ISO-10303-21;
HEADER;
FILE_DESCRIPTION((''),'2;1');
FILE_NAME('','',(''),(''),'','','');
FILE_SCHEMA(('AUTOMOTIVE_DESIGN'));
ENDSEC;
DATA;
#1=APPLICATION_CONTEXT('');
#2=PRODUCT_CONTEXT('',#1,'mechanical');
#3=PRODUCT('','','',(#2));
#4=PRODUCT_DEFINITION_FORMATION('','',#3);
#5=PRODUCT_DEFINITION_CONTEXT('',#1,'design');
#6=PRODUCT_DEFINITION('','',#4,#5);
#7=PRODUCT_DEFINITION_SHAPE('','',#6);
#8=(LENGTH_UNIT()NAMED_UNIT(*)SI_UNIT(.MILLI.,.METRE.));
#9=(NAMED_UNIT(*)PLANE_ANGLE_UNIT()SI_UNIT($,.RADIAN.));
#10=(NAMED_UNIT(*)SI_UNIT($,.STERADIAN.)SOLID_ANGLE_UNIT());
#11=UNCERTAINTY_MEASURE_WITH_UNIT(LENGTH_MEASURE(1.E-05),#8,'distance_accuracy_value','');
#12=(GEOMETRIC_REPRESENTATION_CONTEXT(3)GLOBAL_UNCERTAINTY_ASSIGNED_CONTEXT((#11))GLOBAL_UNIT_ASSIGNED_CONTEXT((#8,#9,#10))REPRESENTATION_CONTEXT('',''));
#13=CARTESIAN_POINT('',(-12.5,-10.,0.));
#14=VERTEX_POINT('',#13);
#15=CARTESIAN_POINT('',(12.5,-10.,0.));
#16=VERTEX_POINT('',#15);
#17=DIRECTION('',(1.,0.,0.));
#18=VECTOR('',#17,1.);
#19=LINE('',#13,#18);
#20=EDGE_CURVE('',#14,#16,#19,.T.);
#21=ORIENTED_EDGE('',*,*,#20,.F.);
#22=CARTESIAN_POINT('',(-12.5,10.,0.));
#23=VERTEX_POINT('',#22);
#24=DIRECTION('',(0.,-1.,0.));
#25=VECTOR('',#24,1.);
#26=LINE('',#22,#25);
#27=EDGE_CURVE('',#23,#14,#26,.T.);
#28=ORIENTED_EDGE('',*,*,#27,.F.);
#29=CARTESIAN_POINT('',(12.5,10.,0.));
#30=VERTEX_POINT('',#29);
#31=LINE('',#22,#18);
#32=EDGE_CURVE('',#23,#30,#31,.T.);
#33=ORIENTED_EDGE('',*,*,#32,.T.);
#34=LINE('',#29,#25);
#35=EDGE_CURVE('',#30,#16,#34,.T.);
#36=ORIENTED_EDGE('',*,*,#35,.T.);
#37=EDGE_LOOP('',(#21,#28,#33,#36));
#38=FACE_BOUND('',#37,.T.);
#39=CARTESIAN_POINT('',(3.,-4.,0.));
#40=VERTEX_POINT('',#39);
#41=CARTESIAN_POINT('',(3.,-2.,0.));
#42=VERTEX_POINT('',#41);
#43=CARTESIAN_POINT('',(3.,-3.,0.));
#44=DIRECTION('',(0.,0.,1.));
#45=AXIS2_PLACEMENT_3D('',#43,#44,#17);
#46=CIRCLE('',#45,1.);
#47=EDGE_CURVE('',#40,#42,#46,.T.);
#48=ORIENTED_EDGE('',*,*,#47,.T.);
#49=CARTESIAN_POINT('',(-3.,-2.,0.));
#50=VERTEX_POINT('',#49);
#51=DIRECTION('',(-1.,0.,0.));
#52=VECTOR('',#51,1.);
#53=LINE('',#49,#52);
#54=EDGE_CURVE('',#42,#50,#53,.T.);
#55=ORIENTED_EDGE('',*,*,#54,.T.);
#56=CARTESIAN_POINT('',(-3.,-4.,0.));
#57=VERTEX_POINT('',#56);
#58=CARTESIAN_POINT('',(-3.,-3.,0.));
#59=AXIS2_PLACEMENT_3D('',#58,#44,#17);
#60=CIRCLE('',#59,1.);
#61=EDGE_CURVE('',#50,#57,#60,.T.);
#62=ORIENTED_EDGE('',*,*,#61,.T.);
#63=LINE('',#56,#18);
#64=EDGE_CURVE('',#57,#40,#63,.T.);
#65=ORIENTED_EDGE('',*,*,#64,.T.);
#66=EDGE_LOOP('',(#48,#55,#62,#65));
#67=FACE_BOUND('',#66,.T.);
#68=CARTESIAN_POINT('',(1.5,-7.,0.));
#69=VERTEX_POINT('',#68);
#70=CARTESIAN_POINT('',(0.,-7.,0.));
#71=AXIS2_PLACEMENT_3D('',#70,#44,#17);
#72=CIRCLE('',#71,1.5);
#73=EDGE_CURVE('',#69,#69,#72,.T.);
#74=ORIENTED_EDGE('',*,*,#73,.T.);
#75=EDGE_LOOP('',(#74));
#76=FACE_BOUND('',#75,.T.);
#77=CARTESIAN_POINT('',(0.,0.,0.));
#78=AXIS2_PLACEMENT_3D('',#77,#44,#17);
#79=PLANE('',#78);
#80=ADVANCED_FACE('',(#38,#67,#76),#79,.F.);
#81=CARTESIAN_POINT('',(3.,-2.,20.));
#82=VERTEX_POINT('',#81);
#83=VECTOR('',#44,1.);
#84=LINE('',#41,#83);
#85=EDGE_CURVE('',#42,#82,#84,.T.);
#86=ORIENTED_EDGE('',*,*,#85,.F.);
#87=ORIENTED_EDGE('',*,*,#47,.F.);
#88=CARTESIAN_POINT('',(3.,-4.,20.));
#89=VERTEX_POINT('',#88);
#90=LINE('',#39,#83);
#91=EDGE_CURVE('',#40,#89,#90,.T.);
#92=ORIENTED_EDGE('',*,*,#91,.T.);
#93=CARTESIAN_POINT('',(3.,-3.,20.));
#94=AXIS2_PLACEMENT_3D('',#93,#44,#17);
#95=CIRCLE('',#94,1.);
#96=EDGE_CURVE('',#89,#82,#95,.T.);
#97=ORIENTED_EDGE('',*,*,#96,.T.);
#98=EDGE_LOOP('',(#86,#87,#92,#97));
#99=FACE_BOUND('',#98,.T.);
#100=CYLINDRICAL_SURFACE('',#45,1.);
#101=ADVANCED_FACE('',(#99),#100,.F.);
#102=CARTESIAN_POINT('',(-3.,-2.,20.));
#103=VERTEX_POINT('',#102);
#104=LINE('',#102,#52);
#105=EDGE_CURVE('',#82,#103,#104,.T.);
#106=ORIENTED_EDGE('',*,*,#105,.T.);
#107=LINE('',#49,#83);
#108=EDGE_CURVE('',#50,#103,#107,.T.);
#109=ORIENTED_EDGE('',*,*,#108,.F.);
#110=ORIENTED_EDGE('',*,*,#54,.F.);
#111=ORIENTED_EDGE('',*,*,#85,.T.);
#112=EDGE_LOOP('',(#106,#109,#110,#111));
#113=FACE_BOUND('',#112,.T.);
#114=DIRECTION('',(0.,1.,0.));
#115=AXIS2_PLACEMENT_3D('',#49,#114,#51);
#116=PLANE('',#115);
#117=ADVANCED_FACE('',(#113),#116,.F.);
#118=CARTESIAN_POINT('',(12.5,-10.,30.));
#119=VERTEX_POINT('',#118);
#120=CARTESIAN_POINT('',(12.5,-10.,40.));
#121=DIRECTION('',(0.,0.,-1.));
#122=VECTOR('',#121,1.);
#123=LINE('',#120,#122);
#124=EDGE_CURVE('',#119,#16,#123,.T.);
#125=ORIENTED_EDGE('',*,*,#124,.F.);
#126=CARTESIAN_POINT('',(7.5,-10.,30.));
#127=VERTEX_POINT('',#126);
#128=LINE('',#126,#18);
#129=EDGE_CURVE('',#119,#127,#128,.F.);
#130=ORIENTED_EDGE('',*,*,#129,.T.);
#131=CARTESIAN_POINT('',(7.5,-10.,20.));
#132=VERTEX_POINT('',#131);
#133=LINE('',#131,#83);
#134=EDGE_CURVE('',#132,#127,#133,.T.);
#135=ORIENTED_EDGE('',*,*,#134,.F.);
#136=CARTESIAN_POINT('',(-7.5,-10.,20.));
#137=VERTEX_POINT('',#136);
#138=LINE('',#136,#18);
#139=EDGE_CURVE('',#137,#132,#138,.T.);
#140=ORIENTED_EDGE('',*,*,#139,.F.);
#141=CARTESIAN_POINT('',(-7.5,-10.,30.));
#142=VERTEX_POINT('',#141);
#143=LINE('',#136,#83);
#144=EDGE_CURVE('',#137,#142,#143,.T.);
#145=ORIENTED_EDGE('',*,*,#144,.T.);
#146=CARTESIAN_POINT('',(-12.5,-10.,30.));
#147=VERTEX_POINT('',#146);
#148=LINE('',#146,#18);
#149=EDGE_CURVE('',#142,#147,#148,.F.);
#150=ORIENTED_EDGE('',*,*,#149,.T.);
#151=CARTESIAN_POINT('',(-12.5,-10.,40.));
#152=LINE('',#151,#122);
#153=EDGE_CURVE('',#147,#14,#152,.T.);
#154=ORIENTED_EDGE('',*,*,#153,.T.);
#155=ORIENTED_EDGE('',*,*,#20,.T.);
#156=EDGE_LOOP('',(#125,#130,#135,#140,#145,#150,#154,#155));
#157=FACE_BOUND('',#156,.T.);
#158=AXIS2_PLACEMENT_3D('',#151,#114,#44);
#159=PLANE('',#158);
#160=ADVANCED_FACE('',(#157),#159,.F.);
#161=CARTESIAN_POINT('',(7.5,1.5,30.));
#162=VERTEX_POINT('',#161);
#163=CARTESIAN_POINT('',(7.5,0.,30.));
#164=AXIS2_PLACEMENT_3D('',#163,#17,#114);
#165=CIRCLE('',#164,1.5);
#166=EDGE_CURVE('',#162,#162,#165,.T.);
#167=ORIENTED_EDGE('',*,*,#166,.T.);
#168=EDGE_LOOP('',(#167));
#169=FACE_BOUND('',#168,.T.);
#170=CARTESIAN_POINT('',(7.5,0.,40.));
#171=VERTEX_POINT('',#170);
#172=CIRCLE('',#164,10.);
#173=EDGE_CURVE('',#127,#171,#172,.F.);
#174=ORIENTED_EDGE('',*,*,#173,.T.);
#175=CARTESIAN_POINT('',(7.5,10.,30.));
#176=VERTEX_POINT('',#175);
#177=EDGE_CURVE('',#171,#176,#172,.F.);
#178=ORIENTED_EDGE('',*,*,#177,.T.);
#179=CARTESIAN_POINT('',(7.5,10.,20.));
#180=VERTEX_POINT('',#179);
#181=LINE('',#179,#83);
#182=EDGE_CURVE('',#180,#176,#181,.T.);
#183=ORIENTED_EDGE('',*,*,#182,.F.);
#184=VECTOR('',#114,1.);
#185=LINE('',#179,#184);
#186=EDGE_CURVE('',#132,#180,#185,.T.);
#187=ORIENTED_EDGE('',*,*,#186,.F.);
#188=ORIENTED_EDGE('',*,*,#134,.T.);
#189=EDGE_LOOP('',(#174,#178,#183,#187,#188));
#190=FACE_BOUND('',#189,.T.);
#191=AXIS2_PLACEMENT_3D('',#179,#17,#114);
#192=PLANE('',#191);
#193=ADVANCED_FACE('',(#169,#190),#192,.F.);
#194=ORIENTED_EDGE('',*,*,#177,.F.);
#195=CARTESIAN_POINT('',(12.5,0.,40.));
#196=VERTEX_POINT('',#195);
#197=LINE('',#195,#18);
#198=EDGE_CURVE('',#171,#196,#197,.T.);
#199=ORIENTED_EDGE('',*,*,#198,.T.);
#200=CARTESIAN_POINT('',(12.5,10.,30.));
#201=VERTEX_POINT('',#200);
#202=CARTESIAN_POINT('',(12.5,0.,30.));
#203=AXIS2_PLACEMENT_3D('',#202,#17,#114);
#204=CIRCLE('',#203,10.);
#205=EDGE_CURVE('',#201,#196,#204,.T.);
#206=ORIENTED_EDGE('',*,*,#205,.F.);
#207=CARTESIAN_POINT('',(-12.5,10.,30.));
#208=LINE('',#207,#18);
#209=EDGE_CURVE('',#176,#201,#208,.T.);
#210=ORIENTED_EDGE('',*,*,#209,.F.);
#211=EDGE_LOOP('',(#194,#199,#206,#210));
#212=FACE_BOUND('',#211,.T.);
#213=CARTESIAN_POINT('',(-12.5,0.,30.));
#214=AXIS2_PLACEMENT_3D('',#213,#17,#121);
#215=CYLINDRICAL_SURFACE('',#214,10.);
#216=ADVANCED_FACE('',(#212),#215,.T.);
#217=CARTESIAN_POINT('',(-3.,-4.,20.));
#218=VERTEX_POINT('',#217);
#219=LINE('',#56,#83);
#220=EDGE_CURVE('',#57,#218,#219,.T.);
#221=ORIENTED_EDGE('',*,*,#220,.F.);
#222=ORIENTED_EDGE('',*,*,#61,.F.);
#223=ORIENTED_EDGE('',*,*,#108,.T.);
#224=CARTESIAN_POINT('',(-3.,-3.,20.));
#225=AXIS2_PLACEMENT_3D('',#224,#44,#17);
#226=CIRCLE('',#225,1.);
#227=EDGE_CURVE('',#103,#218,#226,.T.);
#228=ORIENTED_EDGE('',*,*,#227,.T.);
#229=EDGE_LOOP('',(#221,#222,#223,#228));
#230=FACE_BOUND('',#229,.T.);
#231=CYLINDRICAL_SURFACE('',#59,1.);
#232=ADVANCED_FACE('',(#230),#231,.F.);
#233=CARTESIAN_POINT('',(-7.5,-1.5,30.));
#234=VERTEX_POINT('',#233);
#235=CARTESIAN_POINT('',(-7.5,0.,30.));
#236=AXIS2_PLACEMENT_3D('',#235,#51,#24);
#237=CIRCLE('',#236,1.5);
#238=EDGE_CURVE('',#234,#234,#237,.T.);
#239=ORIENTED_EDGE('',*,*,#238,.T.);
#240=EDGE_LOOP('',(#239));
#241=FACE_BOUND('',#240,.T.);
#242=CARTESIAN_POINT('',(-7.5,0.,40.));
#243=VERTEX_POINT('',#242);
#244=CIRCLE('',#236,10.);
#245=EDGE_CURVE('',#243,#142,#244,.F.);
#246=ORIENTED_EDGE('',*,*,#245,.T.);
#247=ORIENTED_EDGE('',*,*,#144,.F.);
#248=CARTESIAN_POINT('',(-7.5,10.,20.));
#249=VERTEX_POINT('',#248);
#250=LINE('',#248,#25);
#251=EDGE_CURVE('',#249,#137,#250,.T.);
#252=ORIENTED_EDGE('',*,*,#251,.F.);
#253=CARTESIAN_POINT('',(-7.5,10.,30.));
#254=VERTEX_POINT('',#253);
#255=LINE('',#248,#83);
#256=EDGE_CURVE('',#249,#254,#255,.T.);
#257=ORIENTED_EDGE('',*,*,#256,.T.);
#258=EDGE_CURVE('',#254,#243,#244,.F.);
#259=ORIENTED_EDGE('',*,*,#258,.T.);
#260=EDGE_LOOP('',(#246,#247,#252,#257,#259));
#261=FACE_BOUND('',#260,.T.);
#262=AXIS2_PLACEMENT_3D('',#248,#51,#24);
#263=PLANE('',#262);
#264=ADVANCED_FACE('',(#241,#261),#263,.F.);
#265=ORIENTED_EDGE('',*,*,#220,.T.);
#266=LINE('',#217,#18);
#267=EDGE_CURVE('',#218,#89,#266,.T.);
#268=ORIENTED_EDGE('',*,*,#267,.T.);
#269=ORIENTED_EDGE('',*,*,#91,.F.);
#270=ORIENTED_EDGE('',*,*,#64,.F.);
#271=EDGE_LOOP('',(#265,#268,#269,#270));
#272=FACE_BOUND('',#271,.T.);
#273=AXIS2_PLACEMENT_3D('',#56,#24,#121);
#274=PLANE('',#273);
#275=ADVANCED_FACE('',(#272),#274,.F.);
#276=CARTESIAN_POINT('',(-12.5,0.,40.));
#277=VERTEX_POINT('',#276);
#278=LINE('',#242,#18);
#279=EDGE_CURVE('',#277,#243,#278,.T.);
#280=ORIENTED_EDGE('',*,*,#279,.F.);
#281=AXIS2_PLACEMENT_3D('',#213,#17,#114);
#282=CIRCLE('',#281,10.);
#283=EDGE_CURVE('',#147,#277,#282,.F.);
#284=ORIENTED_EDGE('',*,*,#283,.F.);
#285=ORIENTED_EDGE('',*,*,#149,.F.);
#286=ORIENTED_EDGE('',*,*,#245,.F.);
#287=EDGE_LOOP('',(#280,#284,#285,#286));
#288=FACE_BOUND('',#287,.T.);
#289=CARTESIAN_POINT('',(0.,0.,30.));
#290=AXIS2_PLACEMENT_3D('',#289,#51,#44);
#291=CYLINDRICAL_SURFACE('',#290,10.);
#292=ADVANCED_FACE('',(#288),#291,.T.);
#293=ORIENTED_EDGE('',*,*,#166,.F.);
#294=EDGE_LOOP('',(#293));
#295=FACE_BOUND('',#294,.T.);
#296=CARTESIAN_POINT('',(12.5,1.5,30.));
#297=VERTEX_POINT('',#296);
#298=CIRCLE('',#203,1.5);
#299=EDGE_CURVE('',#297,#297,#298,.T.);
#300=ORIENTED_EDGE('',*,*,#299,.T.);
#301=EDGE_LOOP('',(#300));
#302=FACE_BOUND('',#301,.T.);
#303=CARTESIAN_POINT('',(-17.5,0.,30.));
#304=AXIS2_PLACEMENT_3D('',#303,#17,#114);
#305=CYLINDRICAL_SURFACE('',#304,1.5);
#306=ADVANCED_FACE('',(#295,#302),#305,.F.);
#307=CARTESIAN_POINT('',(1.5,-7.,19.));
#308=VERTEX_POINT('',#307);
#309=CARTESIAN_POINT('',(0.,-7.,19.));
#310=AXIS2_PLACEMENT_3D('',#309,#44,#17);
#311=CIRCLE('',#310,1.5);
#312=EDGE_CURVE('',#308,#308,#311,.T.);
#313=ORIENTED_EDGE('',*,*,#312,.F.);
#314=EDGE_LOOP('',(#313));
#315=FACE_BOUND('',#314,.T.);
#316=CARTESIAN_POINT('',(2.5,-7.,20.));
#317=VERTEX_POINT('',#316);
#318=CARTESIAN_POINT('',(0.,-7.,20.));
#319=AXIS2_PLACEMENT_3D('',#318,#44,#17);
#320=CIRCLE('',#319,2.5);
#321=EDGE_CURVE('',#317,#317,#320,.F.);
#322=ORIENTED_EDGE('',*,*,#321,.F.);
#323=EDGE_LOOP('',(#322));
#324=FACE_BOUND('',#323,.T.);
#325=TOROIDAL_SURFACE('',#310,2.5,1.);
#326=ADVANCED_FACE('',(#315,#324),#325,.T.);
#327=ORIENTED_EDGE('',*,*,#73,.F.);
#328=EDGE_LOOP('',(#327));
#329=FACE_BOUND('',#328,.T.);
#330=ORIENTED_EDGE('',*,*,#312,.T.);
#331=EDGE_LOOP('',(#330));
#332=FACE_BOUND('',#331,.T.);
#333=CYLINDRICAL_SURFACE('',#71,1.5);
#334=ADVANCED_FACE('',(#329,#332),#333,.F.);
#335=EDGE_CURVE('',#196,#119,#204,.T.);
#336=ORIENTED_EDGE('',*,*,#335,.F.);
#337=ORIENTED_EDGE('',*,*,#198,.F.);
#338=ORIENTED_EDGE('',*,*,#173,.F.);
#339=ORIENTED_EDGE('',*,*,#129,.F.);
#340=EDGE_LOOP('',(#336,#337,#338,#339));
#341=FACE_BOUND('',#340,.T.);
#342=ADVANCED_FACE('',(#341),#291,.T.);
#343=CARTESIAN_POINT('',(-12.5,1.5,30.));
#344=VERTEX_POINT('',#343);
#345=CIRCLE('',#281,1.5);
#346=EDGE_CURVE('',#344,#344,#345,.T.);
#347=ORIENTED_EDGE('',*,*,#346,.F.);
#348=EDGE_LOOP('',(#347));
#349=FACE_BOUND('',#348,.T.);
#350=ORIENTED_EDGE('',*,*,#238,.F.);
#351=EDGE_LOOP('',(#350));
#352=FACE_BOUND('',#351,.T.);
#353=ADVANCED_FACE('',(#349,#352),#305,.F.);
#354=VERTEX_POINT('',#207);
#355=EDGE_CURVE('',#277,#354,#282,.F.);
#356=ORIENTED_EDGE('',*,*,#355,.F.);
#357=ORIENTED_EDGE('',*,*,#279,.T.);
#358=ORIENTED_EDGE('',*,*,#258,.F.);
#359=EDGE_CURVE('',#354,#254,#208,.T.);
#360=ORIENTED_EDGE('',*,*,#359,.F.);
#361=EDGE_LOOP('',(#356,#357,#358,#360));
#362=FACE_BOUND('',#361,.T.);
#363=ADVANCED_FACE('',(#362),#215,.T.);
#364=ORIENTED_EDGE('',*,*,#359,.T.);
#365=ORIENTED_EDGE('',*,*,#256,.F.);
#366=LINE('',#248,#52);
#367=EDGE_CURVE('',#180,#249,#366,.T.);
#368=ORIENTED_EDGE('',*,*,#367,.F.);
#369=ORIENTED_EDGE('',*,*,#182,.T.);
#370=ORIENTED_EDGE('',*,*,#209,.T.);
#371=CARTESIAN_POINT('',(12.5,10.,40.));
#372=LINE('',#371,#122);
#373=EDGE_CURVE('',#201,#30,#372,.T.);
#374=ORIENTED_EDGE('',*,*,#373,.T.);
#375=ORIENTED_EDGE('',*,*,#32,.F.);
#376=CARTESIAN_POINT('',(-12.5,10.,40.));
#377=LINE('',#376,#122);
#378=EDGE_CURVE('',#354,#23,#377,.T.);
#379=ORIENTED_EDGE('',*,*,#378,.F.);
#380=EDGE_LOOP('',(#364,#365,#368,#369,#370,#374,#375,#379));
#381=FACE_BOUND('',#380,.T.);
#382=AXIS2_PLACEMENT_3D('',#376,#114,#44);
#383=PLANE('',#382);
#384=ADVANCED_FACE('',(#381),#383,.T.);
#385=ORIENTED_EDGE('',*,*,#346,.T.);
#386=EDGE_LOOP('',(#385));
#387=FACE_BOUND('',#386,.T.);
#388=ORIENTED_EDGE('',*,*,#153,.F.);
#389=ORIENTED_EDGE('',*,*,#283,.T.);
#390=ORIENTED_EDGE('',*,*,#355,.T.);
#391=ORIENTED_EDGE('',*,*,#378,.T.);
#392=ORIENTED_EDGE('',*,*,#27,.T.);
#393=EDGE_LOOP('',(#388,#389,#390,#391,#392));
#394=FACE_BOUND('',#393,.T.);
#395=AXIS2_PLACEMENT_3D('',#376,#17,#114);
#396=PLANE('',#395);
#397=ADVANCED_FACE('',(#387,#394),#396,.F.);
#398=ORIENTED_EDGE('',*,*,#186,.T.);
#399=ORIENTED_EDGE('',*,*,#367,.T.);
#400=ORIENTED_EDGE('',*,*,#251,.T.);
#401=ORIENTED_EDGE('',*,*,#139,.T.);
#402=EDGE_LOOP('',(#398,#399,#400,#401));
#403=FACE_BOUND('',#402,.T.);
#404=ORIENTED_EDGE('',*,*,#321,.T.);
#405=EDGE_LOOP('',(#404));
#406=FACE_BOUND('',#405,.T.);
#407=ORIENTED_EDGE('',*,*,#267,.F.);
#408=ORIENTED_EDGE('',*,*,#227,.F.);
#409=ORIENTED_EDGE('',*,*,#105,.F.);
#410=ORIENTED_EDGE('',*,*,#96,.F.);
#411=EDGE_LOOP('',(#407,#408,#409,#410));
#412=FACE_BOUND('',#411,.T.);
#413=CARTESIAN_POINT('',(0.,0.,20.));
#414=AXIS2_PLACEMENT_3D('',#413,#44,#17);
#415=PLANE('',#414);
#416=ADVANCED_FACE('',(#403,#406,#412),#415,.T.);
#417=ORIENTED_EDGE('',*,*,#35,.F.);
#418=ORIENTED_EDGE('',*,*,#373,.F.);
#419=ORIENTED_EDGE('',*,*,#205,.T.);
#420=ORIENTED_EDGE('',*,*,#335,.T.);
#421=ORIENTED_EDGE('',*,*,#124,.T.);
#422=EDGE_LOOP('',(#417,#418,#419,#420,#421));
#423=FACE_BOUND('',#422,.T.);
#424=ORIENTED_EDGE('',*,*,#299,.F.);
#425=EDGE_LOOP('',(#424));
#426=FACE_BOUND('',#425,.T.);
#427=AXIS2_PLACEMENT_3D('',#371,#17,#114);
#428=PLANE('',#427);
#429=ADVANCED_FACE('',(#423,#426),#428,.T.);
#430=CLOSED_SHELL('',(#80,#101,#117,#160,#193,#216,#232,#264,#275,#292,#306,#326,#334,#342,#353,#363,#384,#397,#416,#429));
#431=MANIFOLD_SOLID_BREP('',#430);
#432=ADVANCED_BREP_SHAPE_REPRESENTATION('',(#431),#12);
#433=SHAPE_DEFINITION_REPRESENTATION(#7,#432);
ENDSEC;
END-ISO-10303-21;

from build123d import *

# Parameters (mm, degrees)
SKETCH1_W           = 25
SKETCH1_H           = 20
BOSS_EXTRUDE1_DEPTH = 40
SKETCH2_W           = 15
SKETCH2_H           = 20
CUT_EXTRUDE1_DEPTH  = 20
SKETCH3_R           = 1.5
CUT_EXTRUDE2_DEPTH  = 30
FILLET1_R           = 10
SKETCH4_R           = 1.5
CUT_EXTRUDE3_DEPTH  = 20
FILLET2_R           = 1
CUT_EXTRUDE4_DEPTH  = 20


with BuildPart() as part:
    # Sketch1 → Boss-Extrude1 (new body)
    with BuildSketch(Plane.XY):
        Rectangle(SKETCH1_W, SKETCH1_H)
    extrude(amount=BOSS_EXTRUDE1_DEPTH)

    # Sketch2 → Cut-Extrude1 (cut)
    with BuildSketch(Plane.XY.offset(40)):
        Rectangle(SKETCH2_W, SKETCH2_H)
    extrude(amount=-CUT_EXTRUDE1_DEPTH, mode=Mode.SUBTRACT)

    # Sketch3 → Cut-Extrude2 (cut)
    with BuildSketch(Plane(origin=(12.5, 0, 0), x_dir=(0, 0, -1), z_dir=(1, 0, 0))):
        with Locations(Location((-30, 0, 0), (0, 0, 90))):
            Circle(SKETCH3_R)
    extrude(amount=-CUT_EXTRUDE2_DEPTH, mode=Mode.SUBTRACT)

    # Fillet1
    fillet1_edges = [part.edges().sort_by_distance(p)[0] for p in [
        (-10, 10, 40),
        (10, 10, 40),
        (10, -10, 40),
        (-10, -10, 40),
    ]]
    fillet(fillet1_edges, radius=FILLET1_R - 0.0001)  # a hair under: the kernel refuses the full size

    # Sketch4 → Cut-Extrude3 (cut)
    with BuildSketch(Plane.XY.offset(20)):
        with Locations((0, -7)):
            Circle(SKETCH4_R)
    extrude(amount=-CUT_EXTRUDE3_DEPTH, mode=Mode.SUBTRACT)

    # Fillet2
    fillet2_edges = [part.edges().sort_by_distance(p)[0] for p in [
        (-1.5, -7, 20),
    ]]
    fillet(fillet2_edges, radius=FILLET2_R)

    # Sketch5 → Cut-Extrude4 (cut)
    with BuildSketch(Plane.XY.offset(20)):
        with BuildLine():
            Line((-3, -2), (3, -2))
            ThreePointArc((3, -2), (4, -3), (3, -4))
            Line((3, -4), (-3, -4))
            ThreePointArc((-3, -4), (-4, -3), (-3, -2))
        make_face()
    extrude(amount=-CUT_EXTRUDE4_DEPTH, mode=Mode.SUBTRACT)


solid = part.part
